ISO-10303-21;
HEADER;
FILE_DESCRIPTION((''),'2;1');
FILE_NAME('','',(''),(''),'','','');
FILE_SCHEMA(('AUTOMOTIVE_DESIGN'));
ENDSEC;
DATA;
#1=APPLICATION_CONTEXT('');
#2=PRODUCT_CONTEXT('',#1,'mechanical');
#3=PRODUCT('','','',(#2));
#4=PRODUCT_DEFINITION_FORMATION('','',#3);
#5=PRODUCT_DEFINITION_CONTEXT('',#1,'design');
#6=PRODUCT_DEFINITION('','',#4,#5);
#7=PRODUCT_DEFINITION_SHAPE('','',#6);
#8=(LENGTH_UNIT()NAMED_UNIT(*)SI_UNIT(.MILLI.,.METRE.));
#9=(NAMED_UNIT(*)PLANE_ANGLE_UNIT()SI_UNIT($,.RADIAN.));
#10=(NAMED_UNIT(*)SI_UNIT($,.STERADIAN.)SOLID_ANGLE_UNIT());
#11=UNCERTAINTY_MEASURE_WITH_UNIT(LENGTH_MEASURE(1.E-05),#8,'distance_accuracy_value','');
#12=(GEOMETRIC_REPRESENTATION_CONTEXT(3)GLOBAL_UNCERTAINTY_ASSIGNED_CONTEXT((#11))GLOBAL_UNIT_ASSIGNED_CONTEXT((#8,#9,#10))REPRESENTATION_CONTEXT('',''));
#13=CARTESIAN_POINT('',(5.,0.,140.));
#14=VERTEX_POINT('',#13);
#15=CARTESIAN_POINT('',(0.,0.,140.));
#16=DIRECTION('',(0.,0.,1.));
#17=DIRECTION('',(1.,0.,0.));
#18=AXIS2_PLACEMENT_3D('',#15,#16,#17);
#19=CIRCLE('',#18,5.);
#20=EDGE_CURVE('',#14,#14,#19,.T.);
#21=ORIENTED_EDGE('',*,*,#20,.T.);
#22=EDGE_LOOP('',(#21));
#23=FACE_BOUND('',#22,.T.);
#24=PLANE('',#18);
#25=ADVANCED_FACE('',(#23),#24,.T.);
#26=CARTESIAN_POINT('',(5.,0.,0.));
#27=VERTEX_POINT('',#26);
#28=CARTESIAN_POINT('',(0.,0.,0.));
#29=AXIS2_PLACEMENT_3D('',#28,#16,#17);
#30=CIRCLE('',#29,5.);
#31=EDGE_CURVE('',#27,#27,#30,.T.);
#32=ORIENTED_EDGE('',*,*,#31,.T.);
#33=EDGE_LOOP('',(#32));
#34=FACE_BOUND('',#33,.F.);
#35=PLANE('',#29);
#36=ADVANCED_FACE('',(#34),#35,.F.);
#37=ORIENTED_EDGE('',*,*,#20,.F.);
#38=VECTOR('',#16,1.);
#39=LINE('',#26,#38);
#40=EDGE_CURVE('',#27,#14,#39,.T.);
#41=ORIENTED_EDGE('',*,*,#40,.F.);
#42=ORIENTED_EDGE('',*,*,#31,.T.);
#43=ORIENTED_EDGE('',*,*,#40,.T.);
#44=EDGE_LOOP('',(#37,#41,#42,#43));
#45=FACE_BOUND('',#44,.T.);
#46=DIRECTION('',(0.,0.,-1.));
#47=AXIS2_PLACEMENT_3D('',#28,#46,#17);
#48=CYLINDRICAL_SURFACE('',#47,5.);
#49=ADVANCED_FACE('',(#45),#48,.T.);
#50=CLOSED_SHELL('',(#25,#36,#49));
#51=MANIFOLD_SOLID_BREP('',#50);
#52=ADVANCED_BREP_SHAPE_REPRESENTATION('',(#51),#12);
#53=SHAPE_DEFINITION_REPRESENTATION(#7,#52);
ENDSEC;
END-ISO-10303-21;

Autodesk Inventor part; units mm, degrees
ref_plane "YZ Plane" through (0, 0, 0) normal (1, 0, 0) x (0, 1, 0)
ref_plane "XZ Plane" through (0, 0, 0) normal (0, 1, 0) x (-1, 0, 0)
ref_plane "XY Plane" through (0, 0, 0) normal (0, 0, 1) x (1, 0, 0)
sketch "Sketch1" plane through (0, 0, 0) normal (0, 0, 1) x (1, 0, 0)
  circle A0 centre (0, 0) radius 5
  circle A1 centre (0, 0) radius 3.5
  dimension "d0" = 10
  dimension "d1" = 1.5
extrude "Extrusion1" add sketch "Sketch1" along normal blind 140
thread "Thread1" size "M8x1.25" class "6g" standard "ANSI Metric M Profile" length 10
thread "Thread2" size "M6x1" class "6g" standard "ANSI Metric M Profile" length 10
sketch "Sketch2" plane through (0, 0, 140) normal (0, 0, 1) x (1, 0, 0)
  circle A0 centre (0, 0) radius 5 projected
  circle A1 centre (0, 0) radius 3.5 projected
extrude "Extrusion2" add sketch "Sketch2" against normal blind 140 contours A1
properties part number "Rod qty-6 Not hollow" material "Aluminum 6061"
